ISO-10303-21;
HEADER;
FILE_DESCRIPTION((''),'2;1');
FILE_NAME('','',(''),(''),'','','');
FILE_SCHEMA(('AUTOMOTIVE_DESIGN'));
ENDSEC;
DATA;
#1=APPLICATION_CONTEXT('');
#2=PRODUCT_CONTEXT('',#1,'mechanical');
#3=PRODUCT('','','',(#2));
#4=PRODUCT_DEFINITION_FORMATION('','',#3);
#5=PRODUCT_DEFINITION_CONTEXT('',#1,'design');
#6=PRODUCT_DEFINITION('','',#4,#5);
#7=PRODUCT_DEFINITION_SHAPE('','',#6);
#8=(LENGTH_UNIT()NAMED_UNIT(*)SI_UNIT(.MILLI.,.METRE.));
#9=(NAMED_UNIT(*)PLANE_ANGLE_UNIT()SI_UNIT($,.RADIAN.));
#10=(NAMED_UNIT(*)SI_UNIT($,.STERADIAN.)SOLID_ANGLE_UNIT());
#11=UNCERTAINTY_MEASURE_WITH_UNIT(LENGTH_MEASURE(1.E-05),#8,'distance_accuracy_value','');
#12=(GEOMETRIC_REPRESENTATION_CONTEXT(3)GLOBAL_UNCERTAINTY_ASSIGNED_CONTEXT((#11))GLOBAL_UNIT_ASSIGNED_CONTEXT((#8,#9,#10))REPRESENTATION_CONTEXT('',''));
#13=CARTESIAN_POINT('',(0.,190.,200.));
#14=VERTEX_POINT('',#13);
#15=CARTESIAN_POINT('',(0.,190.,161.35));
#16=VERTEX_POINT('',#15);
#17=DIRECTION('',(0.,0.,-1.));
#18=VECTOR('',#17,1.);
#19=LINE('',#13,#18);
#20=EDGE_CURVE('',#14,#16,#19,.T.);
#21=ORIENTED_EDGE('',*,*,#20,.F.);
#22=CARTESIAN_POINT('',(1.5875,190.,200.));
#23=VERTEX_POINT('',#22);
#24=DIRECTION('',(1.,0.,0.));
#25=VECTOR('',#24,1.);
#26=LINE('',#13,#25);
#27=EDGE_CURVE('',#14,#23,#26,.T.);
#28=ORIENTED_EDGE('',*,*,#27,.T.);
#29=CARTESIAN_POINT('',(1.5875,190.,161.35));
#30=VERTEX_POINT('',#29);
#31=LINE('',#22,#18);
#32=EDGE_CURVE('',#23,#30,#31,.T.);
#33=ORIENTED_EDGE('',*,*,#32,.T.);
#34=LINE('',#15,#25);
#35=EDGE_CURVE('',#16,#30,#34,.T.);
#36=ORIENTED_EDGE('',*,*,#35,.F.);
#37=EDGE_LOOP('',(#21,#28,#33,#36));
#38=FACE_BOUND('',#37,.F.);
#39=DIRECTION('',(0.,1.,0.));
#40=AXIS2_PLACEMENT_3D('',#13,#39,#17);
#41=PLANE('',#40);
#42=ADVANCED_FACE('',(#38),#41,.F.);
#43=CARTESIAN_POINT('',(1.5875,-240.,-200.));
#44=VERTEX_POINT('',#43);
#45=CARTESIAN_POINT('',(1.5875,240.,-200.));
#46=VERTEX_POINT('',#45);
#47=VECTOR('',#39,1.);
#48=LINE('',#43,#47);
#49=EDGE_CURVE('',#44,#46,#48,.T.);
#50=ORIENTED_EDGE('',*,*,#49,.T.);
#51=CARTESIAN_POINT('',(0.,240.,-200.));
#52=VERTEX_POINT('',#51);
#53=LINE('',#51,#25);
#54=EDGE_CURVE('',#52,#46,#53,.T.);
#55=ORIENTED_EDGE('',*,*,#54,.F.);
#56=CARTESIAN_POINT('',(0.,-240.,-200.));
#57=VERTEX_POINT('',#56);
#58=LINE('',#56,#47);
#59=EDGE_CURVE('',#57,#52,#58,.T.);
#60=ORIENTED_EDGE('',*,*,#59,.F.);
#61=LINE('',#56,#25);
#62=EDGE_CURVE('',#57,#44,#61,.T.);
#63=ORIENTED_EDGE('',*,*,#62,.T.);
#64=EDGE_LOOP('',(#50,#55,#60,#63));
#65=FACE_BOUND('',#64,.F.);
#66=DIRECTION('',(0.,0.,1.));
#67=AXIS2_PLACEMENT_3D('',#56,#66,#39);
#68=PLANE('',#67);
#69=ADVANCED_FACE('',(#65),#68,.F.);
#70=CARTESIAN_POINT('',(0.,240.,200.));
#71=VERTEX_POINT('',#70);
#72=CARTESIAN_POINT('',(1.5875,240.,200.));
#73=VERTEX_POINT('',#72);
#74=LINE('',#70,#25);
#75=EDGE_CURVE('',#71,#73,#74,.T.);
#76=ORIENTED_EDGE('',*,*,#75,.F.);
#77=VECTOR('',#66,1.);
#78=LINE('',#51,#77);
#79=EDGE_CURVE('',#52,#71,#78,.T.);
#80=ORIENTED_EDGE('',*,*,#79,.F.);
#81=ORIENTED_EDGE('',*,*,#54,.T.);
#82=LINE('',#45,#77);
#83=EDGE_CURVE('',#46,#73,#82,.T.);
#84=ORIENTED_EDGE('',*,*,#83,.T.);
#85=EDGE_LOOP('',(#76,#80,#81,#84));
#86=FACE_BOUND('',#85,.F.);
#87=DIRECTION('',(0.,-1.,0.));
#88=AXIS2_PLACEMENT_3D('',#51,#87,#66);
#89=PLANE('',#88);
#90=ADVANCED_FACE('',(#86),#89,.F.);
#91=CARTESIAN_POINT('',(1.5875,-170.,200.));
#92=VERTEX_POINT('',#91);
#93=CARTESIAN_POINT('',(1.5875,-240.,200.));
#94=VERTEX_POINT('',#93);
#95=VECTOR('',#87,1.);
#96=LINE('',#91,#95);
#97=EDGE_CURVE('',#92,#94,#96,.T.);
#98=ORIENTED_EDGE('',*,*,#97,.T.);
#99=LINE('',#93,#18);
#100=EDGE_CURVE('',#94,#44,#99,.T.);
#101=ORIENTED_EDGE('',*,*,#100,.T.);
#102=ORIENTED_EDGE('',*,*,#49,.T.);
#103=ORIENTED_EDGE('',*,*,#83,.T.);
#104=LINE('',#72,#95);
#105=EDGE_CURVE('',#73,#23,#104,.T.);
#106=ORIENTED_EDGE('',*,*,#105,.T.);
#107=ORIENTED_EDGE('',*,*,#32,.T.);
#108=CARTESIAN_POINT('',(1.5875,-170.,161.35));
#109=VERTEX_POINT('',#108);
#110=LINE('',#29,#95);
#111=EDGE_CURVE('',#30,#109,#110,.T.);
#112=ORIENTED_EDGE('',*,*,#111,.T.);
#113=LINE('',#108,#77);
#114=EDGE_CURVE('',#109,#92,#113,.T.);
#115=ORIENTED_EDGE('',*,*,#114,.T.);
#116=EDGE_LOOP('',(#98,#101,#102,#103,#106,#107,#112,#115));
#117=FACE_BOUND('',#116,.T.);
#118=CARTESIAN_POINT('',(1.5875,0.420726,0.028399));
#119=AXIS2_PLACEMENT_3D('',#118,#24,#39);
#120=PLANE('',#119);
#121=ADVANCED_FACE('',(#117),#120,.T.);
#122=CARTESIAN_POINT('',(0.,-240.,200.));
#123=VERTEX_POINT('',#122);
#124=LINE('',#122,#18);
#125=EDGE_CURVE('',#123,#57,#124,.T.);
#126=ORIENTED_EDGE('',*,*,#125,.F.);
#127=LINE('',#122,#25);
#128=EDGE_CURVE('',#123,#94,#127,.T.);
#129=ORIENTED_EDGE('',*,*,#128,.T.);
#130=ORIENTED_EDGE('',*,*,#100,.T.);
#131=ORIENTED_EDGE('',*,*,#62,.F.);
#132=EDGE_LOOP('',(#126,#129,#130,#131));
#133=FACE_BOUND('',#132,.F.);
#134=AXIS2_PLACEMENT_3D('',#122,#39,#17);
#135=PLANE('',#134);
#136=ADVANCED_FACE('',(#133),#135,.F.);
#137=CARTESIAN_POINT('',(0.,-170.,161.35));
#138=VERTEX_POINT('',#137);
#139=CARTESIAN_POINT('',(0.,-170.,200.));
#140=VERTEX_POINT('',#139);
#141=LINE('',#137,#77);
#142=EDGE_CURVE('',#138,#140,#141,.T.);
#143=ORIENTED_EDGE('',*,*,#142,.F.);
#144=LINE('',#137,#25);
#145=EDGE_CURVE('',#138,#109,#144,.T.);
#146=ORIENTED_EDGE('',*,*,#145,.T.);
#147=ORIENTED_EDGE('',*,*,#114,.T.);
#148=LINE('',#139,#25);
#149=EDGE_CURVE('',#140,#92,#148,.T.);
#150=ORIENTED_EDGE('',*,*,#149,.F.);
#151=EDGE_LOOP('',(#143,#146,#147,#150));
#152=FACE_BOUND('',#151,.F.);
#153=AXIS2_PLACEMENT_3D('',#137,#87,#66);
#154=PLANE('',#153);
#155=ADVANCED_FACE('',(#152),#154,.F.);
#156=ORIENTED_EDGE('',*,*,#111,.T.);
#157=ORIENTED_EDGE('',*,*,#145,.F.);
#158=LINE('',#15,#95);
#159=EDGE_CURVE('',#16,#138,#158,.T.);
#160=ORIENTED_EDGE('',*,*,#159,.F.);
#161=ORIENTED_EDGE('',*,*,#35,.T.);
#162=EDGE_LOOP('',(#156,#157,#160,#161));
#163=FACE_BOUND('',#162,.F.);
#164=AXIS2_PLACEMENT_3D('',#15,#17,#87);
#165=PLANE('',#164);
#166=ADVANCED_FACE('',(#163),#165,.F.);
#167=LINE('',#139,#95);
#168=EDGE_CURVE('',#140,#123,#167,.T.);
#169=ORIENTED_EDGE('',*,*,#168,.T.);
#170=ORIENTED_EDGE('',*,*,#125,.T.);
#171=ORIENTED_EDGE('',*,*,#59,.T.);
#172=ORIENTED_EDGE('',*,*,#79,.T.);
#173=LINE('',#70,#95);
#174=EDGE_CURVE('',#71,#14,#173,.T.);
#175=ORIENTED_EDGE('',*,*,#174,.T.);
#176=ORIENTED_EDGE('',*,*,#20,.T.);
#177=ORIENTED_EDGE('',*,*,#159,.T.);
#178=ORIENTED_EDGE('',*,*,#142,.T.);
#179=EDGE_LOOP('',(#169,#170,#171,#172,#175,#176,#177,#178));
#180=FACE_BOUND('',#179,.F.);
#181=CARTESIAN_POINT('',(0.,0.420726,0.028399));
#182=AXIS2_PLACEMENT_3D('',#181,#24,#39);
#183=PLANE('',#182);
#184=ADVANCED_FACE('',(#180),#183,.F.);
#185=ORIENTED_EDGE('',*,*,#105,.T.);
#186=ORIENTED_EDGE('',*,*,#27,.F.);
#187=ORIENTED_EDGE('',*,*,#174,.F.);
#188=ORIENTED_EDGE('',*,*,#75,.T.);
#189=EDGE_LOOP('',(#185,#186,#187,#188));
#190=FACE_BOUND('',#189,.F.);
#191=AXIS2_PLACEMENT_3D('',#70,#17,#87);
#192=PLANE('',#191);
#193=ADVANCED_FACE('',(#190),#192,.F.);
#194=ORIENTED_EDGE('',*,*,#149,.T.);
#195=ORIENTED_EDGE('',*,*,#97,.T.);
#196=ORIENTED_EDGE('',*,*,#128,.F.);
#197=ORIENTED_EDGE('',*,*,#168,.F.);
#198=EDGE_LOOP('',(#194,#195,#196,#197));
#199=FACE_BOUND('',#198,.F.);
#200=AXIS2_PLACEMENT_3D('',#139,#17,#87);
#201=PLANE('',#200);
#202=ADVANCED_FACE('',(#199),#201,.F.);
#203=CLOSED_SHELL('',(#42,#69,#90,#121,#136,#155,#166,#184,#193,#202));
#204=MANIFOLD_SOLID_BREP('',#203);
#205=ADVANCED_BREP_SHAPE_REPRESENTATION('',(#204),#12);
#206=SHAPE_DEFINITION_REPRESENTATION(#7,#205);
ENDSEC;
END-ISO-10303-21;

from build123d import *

# Parameters (mm, degrees)
F1_DEPTH = 1.5875


# Not quite as in the source:
# - a length typed as a fraction of an inch, garbled in the dataset ("3 / 203.2 mm" for 3/8 in), is restored


with BuildPart() as f1:
    # F0 (on Right) → F1 (new body)
    with BuildSketch(Plane.YZ):
        Polygon((-240, 200), (-240, -200), (240, -200), (240, 200), (190, 200), (190, 161.35), (-170, 161.35), (-170, 200), align=None)
    extrude(amount=F1_DEPTH)


solid = f1.part
